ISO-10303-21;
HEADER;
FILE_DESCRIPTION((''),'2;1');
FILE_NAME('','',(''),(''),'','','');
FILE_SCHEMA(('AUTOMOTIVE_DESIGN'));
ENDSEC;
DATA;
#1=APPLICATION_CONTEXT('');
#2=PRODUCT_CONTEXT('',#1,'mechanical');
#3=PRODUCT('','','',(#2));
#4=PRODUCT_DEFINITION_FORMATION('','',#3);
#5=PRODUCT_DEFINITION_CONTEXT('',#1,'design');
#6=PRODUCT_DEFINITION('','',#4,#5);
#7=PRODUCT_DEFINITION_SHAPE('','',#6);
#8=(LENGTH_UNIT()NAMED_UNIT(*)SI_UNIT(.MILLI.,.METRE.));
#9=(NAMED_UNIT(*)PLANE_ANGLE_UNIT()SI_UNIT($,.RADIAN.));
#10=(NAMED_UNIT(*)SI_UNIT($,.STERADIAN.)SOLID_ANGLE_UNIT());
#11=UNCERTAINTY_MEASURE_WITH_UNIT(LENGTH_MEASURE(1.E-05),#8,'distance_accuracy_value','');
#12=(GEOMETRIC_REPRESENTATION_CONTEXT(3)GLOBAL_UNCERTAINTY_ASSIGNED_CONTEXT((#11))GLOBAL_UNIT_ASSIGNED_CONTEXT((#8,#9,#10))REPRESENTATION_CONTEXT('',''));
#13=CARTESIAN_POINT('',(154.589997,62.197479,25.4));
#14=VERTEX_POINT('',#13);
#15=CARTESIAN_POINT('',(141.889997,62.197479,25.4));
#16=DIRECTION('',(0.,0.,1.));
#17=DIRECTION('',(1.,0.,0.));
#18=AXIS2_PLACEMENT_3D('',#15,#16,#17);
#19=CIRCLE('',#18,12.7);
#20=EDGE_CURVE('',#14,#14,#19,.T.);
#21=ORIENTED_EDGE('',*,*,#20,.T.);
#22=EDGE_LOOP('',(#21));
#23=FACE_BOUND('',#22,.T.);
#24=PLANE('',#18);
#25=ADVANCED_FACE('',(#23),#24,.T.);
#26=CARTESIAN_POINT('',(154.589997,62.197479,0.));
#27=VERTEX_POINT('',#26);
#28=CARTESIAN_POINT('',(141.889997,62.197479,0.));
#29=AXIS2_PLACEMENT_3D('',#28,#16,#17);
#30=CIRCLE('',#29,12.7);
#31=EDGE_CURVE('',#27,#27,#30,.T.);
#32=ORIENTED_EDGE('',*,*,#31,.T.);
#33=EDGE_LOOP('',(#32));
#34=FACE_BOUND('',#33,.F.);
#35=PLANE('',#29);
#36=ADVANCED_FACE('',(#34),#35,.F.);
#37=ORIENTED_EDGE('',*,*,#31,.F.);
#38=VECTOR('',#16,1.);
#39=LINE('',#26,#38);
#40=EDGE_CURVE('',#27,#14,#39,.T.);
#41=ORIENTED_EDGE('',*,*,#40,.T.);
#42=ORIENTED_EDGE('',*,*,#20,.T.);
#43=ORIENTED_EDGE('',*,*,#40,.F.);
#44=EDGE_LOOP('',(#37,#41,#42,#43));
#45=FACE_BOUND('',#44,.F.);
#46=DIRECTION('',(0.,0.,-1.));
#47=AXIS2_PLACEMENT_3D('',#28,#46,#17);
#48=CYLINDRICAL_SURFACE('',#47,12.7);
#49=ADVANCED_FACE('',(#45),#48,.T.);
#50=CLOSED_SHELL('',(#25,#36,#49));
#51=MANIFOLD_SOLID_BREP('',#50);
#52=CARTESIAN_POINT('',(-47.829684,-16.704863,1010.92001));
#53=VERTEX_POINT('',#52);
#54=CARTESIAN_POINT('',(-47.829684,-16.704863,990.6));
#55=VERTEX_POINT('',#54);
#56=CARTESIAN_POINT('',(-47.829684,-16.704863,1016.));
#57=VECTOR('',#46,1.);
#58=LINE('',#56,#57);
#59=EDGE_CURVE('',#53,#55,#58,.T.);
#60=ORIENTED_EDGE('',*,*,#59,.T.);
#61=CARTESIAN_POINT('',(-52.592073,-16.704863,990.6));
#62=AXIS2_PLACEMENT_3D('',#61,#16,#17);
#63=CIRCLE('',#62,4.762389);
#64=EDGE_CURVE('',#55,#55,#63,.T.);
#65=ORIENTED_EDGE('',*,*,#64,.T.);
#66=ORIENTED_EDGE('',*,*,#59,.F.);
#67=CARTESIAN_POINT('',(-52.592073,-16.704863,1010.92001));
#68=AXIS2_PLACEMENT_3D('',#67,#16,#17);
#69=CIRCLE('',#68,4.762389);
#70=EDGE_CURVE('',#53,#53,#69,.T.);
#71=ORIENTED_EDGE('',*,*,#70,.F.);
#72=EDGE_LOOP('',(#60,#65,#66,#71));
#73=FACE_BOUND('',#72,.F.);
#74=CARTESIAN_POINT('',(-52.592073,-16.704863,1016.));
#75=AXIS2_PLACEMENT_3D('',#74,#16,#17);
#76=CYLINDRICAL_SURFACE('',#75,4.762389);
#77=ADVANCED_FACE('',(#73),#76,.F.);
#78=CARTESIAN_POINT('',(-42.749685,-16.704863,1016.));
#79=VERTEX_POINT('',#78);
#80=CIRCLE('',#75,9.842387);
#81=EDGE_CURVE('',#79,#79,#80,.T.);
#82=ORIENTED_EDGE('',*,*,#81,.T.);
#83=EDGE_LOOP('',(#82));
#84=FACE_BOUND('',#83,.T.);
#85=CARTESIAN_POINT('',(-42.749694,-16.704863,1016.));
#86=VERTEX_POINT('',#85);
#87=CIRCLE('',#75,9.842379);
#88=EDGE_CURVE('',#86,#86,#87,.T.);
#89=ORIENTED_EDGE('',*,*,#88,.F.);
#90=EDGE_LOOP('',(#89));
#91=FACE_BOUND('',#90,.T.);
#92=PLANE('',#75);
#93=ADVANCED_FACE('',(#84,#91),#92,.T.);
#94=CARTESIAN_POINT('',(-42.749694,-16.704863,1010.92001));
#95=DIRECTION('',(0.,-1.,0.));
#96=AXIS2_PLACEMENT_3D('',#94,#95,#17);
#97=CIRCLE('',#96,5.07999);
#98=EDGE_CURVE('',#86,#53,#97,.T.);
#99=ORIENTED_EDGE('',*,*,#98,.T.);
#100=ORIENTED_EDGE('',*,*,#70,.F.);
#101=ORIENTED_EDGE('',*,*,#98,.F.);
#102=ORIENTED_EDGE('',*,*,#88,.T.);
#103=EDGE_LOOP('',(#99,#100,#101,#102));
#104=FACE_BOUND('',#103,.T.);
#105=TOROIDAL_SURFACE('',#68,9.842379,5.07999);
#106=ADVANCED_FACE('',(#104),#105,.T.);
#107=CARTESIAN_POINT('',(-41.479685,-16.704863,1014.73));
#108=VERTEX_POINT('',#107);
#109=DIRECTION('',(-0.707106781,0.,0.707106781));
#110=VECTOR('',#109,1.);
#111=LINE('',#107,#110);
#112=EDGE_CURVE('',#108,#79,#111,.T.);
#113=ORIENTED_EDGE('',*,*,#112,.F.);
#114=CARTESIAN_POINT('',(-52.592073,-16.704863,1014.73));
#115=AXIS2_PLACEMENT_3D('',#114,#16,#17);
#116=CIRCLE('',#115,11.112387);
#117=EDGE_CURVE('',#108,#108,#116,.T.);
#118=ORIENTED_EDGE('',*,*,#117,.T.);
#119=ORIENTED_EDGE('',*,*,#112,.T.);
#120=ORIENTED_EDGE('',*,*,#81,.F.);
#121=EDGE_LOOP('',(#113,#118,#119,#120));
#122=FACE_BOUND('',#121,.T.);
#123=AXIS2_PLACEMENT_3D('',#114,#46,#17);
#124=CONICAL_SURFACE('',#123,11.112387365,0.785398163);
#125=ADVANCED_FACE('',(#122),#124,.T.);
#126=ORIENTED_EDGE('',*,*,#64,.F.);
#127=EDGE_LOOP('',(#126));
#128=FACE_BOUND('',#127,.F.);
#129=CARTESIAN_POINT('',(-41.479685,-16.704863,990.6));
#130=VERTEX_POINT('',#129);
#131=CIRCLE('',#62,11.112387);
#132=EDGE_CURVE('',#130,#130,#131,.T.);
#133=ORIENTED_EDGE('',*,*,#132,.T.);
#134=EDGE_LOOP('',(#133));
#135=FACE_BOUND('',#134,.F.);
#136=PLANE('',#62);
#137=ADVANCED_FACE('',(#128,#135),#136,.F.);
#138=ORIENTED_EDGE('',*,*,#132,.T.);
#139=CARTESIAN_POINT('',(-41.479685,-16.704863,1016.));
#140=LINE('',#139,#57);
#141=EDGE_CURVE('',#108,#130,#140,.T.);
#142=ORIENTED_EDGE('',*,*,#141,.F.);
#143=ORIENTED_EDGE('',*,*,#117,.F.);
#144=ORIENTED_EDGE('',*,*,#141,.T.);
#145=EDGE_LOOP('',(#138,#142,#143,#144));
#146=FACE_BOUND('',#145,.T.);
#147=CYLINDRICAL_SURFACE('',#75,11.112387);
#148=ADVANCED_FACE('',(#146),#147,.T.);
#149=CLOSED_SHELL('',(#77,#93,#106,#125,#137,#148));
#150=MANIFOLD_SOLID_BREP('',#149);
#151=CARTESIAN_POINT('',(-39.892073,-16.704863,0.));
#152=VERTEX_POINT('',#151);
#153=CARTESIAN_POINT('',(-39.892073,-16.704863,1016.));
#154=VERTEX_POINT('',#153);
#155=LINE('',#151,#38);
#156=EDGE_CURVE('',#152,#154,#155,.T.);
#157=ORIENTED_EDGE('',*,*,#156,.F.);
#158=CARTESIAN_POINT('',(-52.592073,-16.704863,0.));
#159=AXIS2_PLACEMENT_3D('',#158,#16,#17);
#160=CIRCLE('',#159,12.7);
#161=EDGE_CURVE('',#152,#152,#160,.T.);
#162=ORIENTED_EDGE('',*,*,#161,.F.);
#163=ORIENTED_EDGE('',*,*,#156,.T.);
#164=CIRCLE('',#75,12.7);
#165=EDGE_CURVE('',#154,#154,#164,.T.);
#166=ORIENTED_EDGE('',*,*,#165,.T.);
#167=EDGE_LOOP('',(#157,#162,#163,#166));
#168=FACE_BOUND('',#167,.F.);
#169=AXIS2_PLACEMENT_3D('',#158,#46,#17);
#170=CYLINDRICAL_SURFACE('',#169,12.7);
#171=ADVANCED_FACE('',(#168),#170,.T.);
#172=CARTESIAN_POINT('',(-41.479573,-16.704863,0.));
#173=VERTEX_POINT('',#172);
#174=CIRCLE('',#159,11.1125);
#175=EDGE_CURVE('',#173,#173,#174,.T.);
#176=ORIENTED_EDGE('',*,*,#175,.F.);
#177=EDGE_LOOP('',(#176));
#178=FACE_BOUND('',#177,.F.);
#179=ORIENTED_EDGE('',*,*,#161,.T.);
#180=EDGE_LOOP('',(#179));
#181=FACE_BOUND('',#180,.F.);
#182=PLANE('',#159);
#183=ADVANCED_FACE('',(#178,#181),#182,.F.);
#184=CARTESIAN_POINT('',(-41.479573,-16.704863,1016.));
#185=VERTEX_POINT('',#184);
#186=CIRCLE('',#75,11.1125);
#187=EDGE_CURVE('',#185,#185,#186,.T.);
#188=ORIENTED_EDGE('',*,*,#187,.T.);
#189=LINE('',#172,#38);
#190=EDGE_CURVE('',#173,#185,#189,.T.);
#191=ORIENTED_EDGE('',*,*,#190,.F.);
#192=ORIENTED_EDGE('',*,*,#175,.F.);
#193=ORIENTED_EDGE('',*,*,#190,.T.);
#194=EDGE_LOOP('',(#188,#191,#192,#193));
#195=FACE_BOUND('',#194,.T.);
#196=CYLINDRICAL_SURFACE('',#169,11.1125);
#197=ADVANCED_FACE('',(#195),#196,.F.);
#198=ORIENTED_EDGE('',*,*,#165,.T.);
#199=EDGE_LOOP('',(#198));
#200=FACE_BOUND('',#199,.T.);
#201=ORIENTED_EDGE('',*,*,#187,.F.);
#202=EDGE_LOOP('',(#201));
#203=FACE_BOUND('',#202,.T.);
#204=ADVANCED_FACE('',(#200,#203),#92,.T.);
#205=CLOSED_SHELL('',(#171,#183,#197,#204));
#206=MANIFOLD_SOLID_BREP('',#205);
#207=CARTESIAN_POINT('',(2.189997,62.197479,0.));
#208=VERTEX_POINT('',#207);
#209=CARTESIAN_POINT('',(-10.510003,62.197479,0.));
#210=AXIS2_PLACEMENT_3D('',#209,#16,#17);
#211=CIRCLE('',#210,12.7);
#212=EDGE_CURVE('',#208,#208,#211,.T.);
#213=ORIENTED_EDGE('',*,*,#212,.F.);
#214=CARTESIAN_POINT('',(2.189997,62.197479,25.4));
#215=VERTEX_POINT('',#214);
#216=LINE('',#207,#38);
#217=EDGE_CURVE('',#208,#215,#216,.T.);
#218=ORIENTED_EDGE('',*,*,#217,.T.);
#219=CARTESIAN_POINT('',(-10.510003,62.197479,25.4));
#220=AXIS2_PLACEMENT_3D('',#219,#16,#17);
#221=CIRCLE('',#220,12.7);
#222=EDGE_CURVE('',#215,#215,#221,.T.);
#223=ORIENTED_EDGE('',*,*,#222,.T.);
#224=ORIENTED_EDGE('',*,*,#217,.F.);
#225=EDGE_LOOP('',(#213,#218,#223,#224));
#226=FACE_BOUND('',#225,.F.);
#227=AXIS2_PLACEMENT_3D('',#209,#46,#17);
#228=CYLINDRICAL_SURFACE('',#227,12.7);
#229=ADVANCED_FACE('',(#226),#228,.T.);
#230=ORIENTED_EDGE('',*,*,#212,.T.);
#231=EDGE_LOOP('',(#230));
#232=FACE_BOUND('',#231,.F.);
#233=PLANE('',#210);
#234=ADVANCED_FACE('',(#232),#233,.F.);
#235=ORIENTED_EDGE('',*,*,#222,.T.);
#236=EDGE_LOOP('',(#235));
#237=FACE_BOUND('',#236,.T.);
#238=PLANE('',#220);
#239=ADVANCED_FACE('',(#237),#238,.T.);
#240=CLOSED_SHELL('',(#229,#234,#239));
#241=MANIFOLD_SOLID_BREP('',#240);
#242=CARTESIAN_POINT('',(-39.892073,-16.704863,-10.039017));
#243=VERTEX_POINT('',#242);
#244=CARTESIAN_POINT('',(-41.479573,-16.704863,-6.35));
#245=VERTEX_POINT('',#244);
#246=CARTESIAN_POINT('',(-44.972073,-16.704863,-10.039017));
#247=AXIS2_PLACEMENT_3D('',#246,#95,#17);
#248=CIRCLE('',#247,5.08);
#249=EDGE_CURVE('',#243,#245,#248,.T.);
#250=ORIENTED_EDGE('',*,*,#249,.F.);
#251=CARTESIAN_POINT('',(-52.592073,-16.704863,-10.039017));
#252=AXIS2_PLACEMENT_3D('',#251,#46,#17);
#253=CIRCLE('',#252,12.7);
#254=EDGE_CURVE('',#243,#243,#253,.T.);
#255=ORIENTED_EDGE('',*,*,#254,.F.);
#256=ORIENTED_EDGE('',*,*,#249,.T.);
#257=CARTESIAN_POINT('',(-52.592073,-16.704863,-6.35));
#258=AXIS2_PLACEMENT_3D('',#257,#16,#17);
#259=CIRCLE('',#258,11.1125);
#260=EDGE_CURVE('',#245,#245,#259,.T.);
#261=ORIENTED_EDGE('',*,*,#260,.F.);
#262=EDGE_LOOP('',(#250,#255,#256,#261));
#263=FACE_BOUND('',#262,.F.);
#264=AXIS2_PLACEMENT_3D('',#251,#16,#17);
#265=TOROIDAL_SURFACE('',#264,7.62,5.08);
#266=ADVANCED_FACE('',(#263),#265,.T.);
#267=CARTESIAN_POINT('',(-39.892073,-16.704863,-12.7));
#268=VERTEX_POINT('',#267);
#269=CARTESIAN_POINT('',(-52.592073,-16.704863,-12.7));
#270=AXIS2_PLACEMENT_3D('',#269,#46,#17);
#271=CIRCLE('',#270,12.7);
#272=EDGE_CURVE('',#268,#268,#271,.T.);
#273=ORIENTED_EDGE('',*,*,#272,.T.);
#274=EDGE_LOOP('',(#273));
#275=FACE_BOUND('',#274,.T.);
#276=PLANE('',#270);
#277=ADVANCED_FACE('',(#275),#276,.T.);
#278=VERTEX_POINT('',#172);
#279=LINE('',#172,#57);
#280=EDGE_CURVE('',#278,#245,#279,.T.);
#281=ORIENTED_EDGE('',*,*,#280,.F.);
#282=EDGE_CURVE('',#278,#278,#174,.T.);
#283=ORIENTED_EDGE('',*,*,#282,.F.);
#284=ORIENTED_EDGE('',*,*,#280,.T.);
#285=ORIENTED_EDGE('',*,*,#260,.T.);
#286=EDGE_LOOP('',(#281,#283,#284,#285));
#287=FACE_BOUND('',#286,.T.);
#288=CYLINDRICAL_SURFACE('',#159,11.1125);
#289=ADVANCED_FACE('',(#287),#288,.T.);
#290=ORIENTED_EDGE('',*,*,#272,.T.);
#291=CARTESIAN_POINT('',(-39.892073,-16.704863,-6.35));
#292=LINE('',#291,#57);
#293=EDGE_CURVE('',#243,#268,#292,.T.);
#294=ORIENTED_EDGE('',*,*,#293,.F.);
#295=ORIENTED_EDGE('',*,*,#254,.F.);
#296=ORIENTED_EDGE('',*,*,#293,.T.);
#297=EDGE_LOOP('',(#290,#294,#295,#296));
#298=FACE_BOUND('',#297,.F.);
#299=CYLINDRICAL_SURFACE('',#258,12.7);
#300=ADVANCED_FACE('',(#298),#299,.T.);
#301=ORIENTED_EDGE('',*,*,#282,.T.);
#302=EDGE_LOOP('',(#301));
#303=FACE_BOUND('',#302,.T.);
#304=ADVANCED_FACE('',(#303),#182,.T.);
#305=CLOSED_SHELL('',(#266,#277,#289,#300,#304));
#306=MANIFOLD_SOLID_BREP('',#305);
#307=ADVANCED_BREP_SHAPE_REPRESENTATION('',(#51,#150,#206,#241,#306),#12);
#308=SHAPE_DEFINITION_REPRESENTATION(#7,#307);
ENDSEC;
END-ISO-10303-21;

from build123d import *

# Parameters (mm, degrees)
F0_R      = 12.7
F0_R_2    = 11.1125
F1_DEPTH  = 1016
F2_DEPTH  = 6.35
F3_R      = 12.7
F4_DEPTH  = 6.35
F6_R      = 11.1123873654
F6_R_2    = 4.7623887658
F7_DEPTH  = 25.4
F8_DEPTH  = 25.4
F9_SIZE   = 1.27
F10_R     = 5.07999
F12_R     = 12.7
F13_DEPTH = 25.4


# Not quite as in the source:
# - a fillet or chamfer that OpenCascade refuses, or shapes differently, is made with other operations: its cross-section is extruded or revolved along the edge and cut away or added
# - a fillet or chamfer is up to 0.001 mm smaller than in the source, because OpenCascade refuses the exact size


with BuildPart() as f1:
    # F0 (on Top) → F1 (new body)
    with BuildSketch(Plane.XY):
        with Locations((-52.5920726359, -16.7048629373)):
            Circle(F0_R)
        with Locations((-52.5920726359, -16.7048629373)):
            Circle(F0_R_2, mode=Mode.SUBTRACT)
    extrude(amount=F1_DEPTH)

    # F0 (on Top) → F2 (join)
    with BuildSketch(Plane.XY):
        with Locations((-52.5920726359, -16.7048629373)):
            Circle(F0_R_2)
    extrude(amount=-F2_DEPTH)

    # F3 (on face) → F4 (join)
    with BuildSketch(Plane(origin=(0, 0, -6.35), x_dir=(1, 0, 0), z_dir=(0, 0, -1))):
        with Locations((-52.5920726359, 16.7048629373)):
            Circle(F3_R)
    extrude(amount=F4_DEPTH)

    # F5: fillet of radius 5.08 on 1 edges, made by hand

    # F5_s1 → F5_t2 (revolve, cut)
    with BuildSketch(Plane.XZ.offset(16.7048629373)):
        with BuildLine():
            ThreePointArc((-39.8920726359, -10.0390166373), (-40.3057946759, -8.0309703231), (-41.4795726359, -6.35))
            Line((-41.4795726359, -6.35), (-41.4097226359, -6.2762196673))
            ThreePointArc((-41.4097226359, -6.2762196673), (-40.6858226359, -6.2484), (-39.8920726359, -6.2484))
            Line((-39.8920726359, -6.2484), (-39.7904726359, -6.35))
            Line((-39.7904726359, -6.35), (-39.7904726359, -10.0390166373))
            Line((-39.7904726359, -10.0390166373), (-39.8920726359, -10.0390166373))
        make_face()
    revolve(axis=Axis((-52.5920726359, -16.7048629373, -6.35), (0, 0, -1)), mode=Mode.SUBTRACT)


with BuildPart() as f7:
    # F6 (on face) → F7 (new body)
    with BuildSketch(Plane.XY.offset(1016)):
        with Locations((-52.5920726359, -16.7048629373)):
            Circle(F6_R)
        with Locations((-52.5920726359, -16.7048629373)):
            Circle(F6_R_2, mode=Mode.SUBTRACT)
    extrude(amount=-F7_DEPTH)

    # F6 (on face) → F8 (join)
    with BuildSketch(Plane.XY.offset(1016)):
        with Locations((-52.5920726359, -16.7048629373)):
            Circle(F6_R)
        with Locations((-52.5920726359, -16.7048629373)):
            Circle(F6_R_2, mode=Mode.SUBTRACT)
    extrude(amount=-F8_DEPTH)

    # F9
    f9_edges = [f7.edges().sort_by_distance(p)[0] for p in [
        (-63.70446, -16.704863, 1016),
    ]]
    chamfer(f9_edges, length=F9_SIZE)

    # F10 (radius 5.08 in the source; OpenCascade refuses exactly that, so slightly less here)
    f10_edges = [f7.edges().sort_by_distance(p)[0] for p in [
        (-57.354461, -16.704863, 1016),
    ]]
    fillet(f10_edges, radius=F10_R)


with BuildPart() as f13:
    # F12 (on Top) → F13 (new body)
    with BuildSketch(Plane.XY):
        with Locations((-10.5100030951, 62.1974789812)):
            Circle(F12_R)
    extrude(amount=F13_DEPTH)


with BuildPart() as f13b:
    # F12 (on Top) → F13, piece 2 (new body)
    with BuildSketch(Plane.XY):
        with Locations((141.8899969049, 62.1974789812)):
            Circle(F12_R)
    extrude(amount=F13_DEPTH)


with BuildPart() as f1_1:
    # F14: moved
    add(f1.part)


solid = Compound([f7.part, f13.part, f13b.part, f1_1.part])
